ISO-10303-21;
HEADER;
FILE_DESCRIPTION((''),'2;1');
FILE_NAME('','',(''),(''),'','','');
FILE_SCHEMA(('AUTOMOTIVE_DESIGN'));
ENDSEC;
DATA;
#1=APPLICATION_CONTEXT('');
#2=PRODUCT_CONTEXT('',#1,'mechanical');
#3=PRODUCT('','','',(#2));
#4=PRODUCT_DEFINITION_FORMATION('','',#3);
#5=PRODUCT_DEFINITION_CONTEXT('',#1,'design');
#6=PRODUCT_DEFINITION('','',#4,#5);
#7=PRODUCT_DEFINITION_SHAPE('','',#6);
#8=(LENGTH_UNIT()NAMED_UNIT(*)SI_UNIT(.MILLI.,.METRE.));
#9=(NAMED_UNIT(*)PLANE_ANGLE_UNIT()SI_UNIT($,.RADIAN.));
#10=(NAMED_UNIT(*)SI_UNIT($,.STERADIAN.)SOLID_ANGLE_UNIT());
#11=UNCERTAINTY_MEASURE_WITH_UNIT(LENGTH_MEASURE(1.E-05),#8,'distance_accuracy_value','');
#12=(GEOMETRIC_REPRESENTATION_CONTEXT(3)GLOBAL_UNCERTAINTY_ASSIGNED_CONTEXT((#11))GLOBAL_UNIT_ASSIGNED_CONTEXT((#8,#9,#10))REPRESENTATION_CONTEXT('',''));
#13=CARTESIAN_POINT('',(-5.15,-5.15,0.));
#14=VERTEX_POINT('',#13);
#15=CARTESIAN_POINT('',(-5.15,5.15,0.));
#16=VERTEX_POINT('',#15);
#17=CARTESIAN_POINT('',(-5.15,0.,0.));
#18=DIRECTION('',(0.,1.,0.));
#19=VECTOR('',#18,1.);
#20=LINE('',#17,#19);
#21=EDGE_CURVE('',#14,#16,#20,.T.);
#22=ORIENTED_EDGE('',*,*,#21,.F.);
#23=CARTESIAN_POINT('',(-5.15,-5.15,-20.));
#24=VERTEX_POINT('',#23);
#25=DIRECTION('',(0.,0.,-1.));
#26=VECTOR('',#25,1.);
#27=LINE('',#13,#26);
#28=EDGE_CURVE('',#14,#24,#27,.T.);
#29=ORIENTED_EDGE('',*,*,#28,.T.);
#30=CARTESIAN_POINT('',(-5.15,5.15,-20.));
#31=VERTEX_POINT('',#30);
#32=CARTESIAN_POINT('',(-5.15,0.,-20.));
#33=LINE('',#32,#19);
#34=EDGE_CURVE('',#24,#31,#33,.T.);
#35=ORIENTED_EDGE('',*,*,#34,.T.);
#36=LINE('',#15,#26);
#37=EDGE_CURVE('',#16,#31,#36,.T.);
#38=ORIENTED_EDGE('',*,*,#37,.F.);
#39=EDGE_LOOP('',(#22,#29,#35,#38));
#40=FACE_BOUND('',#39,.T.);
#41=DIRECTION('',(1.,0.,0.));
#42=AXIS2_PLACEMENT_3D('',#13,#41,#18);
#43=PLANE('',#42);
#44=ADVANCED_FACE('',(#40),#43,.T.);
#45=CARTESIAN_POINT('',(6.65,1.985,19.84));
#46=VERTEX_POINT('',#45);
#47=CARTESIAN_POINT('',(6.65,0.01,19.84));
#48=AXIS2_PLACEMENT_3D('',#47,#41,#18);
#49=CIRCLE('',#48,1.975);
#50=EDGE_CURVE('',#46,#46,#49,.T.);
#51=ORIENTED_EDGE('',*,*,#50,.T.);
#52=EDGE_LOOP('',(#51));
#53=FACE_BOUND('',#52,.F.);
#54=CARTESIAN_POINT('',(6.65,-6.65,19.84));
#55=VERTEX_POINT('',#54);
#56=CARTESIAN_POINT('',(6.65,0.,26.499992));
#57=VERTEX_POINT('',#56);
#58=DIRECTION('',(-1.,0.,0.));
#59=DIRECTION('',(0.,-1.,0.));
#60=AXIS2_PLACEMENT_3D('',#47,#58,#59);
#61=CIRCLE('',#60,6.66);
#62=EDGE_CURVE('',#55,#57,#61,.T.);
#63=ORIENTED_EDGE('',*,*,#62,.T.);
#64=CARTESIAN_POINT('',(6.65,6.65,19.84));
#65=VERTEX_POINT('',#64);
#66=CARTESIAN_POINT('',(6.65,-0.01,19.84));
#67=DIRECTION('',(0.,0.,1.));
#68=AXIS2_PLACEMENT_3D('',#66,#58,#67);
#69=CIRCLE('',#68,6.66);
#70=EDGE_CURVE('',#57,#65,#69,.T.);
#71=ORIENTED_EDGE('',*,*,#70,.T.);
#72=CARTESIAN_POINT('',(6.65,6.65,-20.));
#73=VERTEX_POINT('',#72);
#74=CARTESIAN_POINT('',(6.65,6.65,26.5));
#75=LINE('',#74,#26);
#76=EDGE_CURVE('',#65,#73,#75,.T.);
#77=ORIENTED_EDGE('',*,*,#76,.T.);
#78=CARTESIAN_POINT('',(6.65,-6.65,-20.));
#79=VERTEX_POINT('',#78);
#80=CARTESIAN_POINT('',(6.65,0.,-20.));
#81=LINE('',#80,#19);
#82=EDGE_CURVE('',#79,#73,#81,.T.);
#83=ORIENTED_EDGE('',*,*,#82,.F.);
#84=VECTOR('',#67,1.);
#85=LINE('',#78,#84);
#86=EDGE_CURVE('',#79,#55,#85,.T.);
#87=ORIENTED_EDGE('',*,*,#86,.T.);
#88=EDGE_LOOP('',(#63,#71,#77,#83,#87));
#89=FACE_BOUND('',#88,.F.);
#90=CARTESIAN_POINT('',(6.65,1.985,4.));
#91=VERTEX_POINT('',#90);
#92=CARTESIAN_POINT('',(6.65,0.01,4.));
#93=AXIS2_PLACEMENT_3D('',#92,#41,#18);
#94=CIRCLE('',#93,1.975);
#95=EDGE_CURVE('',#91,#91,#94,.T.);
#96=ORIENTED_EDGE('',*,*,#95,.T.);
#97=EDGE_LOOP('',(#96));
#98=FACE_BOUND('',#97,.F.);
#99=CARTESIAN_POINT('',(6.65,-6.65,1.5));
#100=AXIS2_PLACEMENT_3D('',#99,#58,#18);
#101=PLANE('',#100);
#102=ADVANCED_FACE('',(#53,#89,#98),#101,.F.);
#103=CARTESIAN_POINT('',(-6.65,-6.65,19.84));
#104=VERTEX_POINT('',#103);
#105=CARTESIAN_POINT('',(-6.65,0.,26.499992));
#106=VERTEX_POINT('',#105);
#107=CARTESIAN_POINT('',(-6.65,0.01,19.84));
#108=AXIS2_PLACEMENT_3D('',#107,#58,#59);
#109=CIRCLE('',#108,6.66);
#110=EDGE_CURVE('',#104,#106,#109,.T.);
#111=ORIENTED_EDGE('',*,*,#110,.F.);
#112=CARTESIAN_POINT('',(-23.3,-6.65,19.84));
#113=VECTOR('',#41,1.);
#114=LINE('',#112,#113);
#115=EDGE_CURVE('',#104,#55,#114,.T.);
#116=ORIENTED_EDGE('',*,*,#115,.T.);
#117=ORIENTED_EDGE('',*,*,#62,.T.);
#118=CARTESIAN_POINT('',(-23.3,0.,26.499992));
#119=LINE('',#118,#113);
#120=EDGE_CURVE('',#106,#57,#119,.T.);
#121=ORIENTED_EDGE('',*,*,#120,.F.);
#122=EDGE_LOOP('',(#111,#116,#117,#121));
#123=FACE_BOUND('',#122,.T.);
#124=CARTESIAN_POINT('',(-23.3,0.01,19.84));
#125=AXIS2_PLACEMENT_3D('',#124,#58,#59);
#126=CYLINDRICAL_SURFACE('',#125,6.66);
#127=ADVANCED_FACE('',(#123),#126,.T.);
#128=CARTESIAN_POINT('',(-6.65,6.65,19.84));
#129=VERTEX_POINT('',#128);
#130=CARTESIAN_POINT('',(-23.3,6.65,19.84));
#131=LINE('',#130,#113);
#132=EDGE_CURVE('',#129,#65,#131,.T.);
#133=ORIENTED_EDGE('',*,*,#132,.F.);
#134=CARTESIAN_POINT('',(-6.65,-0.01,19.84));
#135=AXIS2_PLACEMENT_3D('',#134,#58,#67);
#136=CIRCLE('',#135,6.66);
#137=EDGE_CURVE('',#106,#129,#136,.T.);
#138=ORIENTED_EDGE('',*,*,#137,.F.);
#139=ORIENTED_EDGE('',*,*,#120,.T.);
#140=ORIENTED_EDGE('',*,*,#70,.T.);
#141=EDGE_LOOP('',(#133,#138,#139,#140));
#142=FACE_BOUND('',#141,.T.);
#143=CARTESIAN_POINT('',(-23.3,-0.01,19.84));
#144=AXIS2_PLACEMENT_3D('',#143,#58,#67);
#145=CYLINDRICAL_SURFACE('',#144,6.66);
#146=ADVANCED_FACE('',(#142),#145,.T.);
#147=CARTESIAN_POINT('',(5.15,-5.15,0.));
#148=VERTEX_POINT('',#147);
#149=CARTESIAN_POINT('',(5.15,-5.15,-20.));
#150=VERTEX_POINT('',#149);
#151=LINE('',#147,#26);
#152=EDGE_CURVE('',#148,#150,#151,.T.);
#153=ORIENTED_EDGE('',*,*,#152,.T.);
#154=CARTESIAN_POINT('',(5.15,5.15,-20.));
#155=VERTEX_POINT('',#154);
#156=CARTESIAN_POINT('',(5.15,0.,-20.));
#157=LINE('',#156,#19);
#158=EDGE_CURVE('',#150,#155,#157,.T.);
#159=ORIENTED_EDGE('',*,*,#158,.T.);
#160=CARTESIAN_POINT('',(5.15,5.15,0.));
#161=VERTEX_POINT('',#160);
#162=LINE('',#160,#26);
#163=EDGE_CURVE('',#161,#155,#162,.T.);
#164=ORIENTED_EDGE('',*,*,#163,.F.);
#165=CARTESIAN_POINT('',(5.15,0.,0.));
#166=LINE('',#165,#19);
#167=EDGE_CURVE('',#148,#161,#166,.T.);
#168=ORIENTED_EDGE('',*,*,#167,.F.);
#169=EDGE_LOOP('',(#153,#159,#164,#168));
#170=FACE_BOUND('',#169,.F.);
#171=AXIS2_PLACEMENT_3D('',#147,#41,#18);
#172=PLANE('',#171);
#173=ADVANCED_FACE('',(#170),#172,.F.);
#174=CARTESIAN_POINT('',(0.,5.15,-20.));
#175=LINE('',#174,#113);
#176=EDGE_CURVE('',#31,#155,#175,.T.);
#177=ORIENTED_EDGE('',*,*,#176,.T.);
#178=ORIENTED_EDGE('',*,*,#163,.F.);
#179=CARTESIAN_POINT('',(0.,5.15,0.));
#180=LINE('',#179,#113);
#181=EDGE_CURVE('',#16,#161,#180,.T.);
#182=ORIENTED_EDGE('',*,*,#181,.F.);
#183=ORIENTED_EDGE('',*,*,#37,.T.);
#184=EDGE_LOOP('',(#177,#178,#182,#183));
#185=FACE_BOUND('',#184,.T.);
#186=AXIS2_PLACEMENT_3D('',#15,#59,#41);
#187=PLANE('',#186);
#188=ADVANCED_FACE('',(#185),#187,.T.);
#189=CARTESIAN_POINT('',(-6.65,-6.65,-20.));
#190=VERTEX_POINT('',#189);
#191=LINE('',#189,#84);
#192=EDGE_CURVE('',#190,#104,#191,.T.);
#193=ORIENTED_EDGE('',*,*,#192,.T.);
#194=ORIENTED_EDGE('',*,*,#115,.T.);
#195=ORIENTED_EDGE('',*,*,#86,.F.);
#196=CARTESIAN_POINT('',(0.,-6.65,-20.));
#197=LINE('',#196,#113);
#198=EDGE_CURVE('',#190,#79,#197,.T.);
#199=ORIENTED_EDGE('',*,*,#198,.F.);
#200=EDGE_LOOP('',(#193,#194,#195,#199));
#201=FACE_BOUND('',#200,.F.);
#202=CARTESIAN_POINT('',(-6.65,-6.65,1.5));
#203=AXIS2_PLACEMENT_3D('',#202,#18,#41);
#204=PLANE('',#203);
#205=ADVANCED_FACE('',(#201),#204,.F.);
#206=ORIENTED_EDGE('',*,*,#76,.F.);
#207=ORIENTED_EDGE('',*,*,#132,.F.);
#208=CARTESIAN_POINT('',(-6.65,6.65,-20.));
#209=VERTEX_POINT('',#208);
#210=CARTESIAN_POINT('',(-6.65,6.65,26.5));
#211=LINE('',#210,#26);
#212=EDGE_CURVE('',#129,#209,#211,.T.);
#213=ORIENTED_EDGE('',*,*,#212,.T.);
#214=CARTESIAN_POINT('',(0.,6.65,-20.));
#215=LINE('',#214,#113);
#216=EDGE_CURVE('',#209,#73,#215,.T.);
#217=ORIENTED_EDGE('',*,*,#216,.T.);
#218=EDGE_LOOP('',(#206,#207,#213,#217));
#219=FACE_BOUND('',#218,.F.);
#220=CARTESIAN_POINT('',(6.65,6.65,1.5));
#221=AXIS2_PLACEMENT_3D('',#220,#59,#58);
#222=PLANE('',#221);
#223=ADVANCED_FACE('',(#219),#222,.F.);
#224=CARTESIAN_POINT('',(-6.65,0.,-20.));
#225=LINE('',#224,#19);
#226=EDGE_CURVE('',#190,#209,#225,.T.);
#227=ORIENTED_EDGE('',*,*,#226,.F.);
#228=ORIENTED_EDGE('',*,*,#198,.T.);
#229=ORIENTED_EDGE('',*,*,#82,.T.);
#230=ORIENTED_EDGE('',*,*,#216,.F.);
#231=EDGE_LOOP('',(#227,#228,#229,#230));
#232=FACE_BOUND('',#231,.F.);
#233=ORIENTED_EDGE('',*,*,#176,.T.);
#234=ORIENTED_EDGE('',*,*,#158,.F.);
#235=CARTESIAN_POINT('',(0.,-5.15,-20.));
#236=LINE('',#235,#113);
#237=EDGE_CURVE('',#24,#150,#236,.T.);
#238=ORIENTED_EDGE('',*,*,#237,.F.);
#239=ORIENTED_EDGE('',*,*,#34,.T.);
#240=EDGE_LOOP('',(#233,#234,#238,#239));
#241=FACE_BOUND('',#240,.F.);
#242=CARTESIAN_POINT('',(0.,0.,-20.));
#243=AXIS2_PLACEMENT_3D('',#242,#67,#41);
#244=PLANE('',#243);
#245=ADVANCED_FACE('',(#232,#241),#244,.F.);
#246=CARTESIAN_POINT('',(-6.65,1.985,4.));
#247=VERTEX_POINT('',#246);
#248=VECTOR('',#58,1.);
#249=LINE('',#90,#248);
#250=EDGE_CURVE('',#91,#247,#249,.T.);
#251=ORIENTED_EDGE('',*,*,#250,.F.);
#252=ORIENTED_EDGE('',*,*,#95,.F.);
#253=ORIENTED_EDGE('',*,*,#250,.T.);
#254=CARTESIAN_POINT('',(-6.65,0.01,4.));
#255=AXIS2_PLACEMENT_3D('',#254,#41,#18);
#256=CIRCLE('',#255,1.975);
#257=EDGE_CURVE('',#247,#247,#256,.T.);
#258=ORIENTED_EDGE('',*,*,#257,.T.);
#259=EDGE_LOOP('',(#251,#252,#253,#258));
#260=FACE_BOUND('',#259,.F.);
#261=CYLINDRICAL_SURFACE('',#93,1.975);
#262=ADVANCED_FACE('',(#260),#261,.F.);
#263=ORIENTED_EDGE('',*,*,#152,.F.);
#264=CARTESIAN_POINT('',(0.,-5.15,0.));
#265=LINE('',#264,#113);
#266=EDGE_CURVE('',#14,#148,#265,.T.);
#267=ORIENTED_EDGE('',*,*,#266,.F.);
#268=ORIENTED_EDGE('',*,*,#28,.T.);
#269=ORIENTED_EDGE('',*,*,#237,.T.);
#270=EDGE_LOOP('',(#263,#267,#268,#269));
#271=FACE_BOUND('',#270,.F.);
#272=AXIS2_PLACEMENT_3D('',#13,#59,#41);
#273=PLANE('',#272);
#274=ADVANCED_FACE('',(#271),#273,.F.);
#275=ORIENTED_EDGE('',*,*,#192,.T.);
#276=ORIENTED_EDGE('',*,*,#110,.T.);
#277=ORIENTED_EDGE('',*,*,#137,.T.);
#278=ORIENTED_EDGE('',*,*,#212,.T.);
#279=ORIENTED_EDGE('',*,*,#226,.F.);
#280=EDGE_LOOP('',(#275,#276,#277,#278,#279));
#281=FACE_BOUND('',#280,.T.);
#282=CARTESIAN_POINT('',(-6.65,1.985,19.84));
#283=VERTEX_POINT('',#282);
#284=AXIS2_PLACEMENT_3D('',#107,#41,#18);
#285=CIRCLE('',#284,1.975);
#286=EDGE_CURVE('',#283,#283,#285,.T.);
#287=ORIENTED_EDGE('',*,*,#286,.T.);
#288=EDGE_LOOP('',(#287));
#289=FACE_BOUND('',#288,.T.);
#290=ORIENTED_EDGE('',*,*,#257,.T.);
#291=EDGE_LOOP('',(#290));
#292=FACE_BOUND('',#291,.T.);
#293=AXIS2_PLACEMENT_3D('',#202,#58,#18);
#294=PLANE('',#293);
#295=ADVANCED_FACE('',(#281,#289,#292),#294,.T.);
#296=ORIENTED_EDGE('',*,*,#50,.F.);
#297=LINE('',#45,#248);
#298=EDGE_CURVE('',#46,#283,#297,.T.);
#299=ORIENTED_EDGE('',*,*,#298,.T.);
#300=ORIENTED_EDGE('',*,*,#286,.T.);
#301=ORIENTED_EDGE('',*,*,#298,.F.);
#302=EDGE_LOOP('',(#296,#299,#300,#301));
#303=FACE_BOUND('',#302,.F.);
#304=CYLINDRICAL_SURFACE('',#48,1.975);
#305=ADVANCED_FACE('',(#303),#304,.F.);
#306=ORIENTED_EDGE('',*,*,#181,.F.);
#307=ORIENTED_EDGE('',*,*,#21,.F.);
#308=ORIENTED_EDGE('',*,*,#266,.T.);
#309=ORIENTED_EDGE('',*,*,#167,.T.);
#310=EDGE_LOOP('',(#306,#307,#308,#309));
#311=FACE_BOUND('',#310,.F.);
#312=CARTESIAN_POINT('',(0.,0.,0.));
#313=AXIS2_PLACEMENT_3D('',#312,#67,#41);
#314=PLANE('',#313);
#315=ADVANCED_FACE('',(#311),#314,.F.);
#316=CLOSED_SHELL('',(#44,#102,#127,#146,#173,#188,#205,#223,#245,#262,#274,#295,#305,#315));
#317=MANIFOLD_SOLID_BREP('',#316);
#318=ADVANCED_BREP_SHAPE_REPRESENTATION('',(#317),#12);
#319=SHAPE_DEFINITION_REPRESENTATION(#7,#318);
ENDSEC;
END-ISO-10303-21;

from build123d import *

# Parameters (mm, degrees)
F0_W          = 13.3
F0_H          = 13.3
F0_W_2        = 10.3
F0_H_2        = 10.3
F1_DEPTH      = 20
F2_DEPTH      = 1.5
F3_W          = 4
F3_H          = 13.3
F3_W_2        = 5.3
F4_DEPTH      = 25
F5_T1_DEPTH   = 46.6
F6_R          = 1.975
F7_DEPTH      = 25
F7_DEPTH_BACK = 25


# Not quite as in the source:
# - a fillet or chamfer that OpenCascade refuses, or shapes differently, is made with other operations: its cross-section is extruded or revolved along the edge and cut away or added


with BuildPart() as f1:
    # F0 (on Top) → F1 (new body)
    with BuildSketch(Plane.XY):
        Rectangle(F0_W, F0_H)
        Rectangle(F0_W_2, F0_H_2, mode=Mode.SUBTRACT)
    extrude(amount=-F1_DEPTH)

    # F0 (on Top) → F2 (join)
    with BuildSketch(Plane.XY):
        Rectangle(F0_W, F0_H)
        Rectangle(F0_W_2, F0_H_2, mode=Mode.SUBTRACT)
        Rectangle(F0_W_2, F0_H_2)
    extrude(amount=F2_DEPTH)

    # F3 (on face) → F4 (join)
    with BuildSketch(Plane.XY.offset(1.5)):
        with Locations((-4.65, 0)):
            Rectangle(F3_W, F3_H)
        with Locations((4.65, 0)):
            Rectangle(F3_W, F3_H)
        Rectangle(F3_W_2, F3_H)
    extrude(amount=F4_DEPTH)

    # F5: fillet of radius 6.66 on 2 edges, made by hand

    # F5_s2 → F5_t1 (cut)
    with BuildSketch(Plane.YZ.offset(-23.3)):
        with BuildLine():
            ThreePointArc((-0.01, 26.5), (4.6993311627, 24.5493311627), (6.65, 19.84))
            Line((6.65, 19.84), (6.65, 26.5))
            Line((6.65, 26.5), (-0.01, 26.5))
        make_face()
        with BuildLine():
            ThreePointArc((-6.65, 19.84), (-4.6993311627, 24.5493311627), (0.01, 26.5))
            Line((0.01, 26.5), (-6.65, 26.5))
            Line((-6.65, 26.5), (-6.65, 19.84))
        make_face()
    extrude(amount=F5_T1_DEPTH, mode=Mode.SUBTRACT)

    # F6 (on face) → F7 (cut, two sides)
    with BuildSketch(Plane.YZ.offset(6.65)) as f7_sk:
        with Locations((0.01, 4)):
            Circle(F6_R)
        with Locations((0.01, 19.84)):
            Circle(F6_R)
    extrude(amount=-F7_DEPTH, mode=Mode.SUBTRACT)
    extrude(f7_sk.sketch, amount=F7_DEPTH_BACK, mode=Mode.SUBTRACT)


solid = f1.part
